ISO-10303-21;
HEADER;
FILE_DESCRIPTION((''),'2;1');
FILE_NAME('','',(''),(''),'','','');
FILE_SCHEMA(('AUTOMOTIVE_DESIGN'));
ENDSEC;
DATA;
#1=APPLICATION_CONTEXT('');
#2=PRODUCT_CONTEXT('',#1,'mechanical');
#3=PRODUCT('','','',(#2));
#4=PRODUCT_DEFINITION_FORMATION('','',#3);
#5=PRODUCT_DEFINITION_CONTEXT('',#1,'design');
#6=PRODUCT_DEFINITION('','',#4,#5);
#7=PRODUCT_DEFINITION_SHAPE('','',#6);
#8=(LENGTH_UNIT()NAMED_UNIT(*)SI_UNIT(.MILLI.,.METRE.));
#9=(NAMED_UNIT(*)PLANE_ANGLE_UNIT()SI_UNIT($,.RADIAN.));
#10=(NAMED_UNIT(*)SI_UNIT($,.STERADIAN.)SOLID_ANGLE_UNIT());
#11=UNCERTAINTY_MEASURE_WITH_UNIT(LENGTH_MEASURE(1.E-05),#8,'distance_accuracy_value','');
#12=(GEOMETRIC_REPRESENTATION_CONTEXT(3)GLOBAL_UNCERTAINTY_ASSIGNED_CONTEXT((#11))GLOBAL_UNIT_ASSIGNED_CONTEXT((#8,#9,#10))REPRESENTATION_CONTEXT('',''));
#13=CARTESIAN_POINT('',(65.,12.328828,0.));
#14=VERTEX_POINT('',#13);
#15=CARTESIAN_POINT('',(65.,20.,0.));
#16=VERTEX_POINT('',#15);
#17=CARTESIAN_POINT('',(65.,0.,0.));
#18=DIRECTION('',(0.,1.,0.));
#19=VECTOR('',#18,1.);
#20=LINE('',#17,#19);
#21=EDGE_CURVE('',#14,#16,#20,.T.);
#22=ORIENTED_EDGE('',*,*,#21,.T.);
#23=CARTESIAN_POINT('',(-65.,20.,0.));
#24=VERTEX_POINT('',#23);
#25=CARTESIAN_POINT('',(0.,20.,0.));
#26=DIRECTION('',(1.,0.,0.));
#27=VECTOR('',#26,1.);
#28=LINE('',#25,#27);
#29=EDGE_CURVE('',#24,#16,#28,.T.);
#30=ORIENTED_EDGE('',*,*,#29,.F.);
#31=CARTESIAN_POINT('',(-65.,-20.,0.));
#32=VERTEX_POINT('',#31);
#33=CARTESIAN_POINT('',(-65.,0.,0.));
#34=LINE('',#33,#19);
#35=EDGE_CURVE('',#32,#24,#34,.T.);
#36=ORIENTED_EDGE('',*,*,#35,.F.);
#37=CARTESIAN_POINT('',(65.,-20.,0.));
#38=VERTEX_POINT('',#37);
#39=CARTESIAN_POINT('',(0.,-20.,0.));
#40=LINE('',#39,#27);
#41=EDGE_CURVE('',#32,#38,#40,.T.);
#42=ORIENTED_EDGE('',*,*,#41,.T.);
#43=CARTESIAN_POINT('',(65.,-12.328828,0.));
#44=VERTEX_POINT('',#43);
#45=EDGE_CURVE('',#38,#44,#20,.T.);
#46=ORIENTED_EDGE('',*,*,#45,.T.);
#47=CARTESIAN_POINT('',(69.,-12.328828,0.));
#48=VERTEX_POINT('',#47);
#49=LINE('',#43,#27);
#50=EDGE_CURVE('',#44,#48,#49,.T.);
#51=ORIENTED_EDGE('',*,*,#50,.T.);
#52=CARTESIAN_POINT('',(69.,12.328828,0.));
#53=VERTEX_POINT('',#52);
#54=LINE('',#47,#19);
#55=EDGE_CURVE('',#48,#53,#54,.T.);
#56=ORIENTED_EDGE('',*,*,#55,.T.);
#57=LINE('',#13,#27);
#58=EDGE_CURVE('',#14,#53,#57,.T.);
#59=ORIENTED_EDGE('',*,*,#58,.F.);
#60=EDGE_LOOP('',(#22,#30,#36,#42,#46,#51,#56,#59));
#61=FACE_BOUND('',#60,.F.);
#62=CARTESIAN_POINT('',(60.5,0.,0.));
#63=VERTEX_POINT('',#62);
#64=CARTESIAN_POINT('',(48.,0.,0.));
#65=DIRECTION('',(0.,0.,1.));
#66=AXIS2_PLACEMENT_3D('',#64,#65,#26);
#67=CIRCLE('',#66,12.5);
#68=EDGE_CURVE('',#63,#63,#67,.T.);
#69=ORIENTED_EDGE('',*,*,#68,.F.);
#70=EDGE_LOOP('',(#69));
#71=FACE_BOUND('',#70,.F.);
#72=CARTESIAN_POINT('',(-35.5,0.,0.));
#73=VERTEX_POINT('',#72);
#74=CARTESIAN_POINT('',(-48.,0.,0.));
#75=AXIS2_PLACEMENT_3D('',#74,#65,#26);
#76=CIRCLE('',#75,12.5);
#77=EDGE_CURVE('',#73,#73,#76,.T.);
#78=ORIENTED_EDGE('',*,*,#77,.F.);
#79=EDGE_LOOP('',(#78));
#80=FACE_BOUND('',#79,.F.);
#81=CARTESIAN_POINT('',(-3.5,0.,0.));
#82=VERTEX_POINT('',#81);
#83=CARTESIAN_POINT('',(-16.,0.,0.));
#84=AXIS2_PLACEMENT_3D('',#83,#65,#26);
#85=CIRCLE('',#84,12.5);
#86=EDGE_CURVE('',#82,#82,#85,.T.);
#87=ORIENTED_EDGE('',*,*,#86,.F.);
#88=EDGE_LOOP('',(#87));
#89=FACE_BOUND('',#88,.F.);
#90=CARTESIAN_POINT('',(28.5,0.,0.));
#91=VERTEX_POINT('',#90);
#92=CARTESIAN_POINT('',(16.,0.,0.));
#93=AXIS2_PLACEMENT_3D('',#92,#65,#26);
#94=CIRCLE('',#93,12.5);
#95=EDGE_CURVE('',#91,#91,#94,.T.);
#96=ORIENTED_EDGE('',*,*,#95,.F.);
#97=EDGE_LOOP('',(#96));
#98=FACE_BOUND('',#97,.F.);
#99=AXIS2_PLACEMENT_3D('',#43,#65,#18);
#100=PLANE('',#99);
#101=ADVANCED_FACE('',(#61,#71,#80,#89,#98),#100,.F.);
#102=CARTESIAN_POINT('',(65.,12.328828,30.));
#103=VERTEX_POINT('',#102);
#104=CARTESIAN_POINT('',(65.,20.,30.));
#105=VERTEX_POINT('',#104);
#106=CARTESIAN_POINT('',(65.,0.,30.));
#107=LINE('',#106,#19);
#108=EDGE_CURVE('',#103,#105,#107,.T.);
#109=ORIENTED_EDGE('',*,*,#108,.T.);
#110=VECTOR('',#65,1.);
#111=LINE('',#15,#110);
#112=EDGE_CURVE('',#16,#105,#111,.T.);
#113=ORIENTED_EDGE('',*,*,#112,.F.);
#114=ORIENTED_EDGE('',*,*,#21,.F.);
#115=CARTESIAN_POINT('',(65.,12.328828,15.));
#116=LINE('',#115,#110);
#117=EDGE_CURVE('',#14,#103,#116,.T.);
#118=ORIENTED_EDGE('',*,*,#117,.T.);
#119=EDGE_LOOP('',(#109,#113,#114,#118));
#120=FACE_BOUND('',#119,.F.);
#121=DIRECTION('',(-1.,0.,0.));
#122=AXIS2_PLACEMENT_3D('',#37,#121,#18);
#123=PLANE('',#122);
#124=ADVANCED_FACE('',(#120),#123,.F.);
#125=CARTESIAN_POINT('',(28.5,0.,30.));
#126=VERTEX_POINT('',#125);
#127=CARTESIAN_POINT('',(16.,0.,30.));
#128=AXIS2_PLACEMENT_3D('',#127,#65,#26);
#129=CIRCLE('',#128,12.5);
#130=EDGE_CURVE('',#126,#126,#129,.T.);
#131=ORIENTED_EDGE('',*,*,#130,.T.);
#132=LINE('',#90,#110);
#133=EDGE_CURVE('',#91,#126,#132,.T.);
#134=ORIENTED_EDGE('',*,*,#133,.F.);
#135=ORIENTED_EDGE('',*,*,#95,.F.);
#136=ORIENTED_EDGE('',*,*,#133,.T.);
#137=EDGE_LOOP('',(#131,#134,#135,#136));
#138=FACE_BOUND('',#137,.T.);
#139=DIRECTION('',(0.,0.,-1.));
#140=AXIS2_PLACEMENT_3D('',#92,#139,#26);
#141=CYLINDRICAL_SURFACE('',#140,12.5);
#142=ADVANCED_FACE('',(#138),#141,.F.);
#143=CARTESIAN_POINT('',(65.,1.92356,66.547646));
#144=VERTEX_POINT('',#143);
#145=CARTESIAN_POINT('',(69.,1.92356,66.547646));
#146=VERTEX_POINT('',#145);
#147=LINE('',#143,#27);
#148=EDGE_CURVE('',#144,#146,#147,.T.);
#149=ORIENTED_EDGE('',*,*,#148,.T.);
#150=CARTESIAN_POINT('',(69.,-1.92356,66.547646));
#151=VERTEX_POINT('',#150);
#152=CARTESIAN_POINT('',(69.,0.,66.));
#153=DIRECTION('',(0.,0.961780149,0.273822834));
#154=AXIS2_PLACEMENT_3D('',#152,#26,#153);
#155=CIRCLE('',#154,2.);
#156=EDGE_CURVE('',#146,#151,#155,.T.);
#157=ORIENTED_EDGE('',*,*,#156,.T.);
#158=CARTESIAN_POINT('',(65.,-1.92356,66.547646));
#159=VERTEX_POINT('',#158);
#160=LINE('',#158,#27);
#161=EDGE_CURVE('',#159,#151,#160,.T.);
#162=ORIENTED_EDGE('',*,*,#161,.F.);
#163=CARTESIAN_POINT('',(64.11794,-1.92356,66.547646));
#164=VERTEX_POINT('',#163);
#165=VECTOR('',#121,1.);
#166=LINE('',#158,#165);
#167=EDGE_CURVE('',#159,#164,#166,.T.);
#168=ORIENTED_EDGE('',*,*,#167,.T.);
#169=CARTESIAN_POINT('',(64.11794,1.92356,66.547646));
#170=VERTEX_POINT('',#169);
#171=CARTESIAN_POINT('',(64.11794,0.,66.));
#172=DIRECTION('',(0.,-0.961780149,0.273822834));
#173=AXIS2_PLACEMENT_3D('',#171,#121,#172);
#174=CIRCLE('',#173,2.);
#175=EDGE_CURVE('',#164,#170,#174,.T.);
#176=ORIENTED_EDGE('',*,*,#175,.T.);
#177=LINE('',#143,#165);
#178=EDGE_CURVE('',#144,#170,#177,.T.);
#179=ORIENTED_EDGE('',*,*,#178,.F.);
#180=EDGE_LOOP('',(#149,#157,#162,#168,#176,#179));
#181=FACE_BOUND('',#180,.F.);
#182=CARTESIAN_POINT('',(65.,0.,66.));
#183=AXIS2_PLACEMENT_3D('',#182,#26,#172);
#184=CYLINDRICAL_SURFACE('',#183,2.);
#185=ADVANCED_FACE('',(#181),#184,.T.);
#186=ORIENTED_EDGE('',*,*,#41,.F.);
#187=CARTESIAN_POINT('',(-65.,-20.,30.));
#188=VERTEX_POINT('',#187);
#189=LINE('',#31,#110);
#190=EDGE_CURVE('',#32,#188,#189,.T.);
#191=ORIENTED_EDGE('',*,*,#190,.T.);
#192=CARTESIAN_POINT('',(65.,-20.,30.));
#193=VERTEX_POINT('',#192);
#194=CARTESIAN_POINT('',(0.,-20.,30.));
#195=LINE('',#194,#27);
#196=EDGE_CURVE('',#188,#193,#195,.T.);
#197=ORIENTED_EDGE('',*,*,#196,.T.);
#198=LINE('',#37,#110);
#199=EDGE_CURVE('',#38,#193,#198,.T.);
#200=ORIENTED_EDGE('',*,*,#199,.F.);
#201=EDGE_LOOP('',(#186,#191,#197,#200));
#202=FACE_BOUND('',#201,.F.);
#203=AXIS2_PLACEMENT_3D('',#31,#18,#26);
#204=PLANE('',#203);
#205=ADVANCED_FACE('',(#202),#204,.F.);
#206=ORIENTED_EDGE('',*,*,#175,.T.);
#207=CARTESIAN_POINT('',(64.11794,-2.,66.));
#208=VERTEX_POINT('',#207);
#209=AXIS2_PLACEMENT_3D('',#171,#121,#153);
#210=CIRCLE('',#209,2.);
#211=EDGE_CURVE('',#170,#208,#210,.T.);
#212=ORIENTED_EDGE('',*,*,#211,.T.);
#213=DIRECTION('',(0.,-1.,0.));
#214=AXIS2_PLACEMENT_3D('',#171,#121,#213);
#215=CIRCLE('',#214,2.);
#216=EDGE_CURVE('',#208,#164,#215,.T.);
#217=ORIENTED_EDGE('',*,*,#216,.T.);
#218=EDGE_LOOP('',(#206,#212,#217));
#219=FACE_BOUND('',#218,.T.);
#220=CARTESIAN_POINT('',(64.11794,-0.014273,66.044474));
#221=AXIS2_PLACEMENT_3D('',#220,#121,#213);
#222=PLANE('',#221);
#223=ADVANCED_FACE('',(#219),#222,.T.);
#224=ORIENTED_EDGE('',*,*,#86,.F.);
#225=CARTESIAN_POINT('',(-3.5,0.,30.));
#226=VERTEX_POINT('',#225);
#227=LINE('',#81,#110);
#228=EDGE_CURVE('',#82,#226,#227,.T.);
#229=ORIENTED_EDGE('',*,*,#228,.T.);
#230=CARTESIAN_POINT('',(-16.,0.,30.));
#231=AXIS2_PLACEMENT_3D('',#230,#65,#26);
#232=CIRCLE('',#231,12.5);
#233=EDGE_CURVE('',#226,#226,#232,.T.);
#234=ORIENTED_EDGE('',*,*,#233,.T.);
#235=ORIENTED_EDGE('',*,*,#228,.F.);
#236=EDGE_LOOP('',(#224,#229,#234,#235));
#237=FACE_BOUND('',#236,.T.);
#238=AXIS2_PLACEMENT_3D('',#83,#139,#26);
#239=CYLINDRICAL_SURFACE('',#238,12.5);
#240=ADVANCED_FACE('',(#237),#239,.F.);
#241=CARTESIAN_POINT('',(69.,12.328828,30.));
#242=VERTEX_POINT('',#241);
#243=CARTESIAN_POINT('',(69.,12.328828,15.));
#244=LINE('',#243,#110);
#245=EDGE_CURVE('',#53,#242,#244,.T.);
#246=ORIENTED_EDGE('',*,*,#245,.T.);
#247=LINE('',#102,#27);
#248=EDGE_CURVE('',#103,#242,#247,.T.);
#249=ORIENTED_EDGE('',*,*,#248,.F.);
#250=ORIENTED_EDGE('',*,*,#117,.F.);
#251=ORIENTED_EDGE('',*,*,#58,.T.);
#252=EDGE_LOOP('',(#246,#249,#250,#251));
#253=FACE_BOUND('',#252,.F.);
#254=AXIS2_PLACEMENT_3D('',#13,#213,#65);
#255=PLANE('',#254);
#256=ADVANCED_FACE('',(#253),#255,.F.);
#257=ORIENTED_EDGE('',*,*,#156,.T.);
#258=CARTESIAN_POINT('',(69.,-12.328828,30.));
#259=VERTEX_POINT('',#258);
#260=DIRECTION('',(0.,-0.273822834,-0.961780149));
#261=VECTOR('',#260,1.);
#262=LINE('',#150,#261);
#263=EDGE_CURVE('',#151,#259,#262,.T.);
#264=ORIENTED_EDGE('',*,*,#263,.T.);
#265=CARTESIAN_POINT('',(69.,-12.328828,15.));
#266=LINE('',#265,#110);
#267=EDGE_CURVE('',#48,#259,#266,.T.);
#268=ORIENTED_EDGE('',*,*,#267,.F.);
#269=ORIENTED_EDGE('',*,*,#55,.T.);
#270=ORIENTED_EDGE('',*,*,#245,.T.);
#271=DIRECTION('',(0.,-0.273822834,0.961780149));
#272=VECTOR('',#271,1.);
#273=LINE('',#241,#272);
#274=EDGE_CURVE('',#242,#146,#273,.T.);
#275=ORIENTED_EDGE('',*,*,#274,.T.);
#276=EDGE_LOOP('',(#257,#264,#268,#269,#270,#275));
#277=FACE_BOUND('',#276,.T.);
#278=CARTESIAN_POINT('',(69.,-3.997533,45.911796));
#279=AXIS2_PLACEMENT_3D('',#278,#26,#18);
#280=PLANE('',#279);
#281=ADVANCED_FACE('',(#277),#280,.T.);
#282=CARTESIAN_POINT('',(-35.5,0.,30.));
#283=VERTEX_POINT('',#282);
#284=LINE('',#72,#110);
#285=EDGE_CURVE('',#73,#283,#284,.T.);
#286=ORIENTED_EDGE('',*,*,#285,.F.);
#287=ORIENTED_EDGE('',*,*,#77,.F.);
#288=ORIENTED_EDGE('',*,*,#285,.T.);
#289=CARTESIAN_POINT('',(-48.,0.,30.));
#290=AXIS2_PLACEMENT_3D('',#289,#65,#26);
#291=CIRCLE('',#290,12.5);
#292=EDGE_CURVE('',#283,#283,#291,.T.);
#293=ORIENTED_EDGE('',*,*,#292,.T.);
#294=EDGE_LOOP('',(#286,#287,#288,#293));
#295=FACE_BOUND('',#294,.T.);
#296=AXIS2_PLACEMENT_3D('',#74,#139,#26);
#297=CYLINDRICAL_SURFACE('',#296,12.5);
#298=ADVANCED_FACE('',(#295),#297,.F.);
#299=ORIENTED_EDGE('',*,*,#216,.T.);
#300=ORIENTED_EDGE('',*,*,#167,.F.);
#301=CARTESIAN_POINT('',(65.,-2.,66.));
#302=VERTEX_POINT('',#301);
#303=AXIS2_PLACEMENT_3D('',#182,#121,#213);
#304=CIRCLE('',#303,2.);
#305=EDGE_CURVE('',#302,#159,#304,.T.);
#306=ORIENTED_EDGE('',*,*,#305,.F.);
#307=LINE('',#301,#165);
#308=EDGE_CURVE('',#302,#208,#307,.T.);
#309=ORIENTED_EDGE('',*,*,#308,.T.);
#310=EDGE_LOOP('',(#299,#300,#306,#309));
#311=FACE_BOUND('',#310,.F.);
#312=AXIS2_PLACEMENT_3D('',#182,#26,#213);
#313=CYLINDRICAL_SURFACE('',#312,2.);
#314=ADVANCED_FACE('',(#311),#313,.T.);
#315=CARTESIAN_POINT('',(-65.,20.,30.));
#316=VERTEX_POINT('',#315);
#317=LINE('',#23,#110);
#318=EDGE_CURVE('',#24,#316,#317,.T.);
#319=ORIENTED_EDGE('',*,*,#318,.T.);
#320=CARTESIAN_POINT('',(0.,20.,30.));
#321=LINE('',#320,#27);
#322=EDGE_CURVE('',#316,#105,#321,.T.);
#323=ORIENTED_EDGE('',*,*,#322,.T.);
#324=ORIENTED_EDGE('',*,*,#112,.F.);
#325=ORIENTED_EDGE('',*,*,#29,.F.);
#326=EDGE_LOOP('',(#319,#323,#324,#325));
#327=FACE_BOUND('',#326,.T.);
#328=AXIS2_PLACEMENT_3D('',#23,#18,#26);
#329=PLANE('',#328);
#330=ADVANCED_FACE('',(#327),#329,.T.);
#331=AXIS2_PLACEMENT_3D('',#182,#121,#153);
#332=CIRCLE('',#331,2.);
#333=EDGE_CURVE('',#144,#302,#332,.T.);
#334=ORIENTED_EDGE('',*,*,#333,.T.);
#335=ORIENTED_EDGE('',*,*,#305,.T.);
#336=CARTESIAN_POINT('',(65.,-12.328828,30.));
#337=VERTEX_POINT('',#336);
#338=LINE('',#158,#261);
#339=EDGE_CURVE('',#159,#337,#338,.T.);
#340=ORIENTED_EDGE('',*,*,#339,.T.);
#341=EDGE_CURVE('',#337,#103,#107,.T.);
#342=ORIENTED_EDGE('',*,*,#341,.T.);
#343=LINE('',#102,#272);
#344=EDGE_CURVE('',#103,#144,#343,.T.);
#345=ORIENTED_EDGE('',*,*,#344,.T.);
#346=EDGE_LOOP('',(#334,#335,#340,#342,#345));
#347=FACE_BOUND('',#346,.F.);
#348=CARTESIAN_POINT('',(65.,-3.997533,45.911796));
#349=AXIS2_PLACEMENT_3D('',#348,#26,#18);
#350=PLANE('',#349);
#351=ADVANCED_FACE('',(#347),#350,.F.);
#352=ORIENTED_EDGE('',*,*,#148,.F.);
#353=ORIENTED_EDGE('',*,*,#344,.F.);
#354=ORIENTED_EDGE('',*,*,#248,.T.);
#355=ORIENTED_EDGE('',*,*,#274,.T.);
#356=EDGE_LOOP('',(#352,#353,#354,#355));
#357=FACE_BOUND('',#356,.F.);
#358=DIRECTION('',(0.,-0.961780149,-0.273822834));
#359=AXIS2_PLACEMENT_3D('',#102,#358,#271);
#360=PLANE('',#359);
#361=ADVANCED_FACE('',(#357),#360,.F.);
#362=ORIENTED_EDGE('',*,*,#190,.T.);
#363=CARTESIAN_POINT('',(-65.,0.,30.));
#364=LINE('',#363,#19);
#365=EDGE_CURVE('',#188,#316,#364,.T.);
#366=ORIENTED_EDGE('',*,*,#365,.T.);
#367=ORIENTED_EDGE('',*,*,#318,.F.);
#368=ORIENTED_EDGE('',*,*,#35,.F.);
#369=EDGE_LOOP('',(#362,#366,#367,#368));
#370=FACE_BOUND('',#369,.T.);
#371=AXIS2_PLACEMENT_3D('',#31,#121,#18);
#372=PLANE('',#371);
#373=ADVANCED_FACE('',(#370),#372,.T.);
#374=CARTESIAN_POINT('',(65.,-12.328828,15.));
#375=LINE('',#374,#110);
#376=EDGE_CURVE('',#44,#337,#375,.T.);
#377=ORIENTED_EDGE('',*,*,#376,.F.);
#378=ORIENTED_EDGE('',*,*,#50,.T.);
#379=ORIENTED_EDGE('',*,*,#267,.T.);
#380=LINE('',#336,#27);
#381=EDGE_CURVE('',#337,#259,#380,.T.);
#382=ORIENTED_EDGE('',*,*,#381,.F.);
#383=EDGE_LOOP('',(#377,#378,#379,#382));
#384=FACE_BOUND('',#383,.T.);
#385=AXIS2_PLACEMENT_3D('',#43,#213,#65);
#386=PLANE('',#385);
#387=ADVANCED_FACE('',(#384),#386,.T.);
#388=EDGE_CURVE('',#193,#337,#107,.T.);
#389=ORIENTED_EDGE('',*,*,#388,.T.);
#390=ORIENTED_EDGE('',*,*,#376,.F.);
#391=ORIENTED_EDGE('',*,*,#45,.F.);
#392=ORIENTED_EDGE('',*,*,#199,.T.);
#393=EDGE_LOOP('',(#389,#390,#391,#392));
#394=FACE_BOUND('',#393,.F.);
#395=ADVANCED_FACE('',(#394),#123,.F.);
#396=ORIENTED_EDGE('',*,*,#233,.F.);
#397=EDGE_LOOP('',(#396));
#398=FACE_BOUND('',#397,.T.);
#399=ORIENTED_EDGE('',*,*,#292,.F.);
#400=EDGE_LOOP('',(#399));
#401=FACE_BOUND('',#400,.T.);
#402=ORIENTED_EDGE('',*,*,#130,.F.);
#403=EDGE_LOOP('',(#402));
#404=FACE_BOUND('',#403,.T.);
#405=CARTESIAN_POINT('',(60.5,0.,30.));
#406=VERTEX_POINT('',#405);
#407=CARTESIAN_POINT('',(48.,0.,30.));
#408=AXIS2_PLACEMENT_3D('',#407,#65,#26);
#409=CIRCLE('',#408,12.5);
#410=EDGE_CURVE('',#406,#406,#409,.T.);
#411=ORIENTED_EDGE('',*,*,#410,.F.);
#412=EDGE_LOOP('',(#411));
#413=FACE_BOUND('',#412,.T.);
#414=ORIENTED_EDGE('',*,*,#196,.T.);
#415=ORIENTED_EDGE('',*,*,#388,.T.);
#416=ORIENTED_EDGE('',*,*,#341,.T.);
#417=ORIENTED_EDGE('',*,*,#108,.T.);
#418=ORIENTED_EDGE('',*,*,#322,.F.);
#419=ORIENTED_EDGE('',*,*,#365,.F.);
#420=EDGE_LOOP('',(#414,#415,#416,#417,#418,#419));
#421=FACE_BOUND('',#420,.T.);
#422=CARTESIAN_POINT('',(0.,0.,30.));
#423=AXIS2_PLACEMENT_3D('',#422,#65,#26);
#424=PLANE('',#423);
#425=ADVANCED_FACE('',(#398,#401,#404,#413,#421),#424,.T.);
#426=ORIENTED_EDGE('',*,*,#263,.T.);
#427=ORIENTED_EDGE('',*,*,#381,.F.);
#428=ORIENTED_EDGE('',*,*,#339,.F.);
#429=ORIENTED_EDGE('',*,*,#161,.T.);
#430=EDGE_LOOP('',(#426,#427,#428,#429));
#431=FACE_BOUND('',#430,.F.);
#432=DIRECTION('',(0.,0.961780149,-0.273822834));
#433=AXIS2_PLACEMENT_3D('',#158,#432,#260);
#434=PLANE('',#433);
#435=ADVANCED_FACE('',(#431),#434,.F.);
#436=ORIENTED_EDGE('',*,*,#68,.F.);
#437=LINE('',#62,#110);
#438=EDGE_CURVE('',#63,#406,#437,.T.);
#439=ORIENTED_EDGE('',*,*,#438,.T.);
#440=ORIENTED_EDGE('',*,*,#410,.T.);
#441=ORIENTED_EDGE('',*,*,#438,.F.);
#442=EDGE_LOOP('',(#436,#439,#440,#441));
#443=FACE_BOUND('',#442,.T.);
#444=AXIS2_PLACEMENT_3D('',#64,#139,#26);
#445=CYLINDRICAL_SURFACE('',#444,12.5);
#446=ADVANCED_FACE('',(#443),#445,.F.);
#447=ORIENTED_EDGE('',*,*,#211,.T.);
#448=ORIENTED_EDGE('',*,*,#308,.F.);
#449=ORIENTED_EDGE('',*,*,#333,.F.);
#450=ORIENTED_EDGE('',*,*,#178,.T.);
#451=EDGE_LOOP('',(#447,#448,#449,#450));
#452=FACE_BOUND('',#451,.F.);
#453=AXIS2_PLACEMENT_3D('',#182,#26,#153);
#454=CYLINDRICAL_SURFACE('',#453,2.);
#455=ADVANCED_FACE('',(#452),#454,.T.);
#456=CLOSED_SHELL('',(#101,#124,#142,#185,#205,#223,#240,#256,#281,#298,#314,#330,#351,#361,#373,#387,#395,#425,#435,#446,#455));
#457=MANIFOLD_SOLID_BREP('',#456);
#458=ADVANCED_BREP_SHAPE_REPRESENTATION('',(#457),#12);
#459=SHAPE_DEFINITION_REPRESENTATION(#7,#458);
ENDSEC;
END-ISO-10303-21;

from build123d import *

# Parameters (mm, degrees)
F0_W     = 130
F0_H     = 40
F0_R     = 12.5
F1_DEPTH = 30
F2_W     = 12.3288280059
F2_H     = 30
F3_DEPTH = 4
F4_DEPTH = 4
F6_DEPTH = 0.88206


with BuildPart() as f1:
    # F0 (on Top) → F1 (new body)
    with BuildSketch(Plane.XY):
        Rectangle(F0_W, F0_H)
        with Locations((-48, 0)):
            Circle(F0_R, mode=Mode.SUBTRACT)
        with Locations((-16, 0)):
            Circle(F0_R, mode=Mode.SUBTRACT)
        with Locations((16, 0)):
            Circle(F0_R, mode=Mode.SUBTRACT)
        with Locations((48, 0)):
            Circle(F0_R, mode=Mode.SUBTRACT)
    extrude(amount=F1_DEPTH)

    # F2 (on face) → F3 (join)
    with BuildSketch(Plane.YZ.offset(65)):
        with BuildLine():
            Line((-12.3288280059, 30), (0, 30))
            Line((0, 30), (0, 64))
            ThreePointArc((0, 64), (-1.5961346024, 64.7948633558), (-1.9235602984, 66.5476456688))
            Line((-1.9235602984, 66.5476456688), (-12.3288280059, 30))
        make_face()
        with BuildLine():
            Line((0, 64), (0, 30))
            Line((0, 30), (12.3288280059, 30))
            Line((12.3288280059, 30), (1.9235602984, 66.5476456688))
            ThreePointArc((1.9235602984, 66.5476456688), (1.9807978944, 66.2764773076), (2, 66))
            ThreePointArc((2, 66), (1.4142135624, 64.5857864376), (0, 64))
        make_face()
        with Locations((6.164414003, 15)):
            Rectangle(F2_W, F2_H)
        with Locations((-6.164414003, 15)):
            Rectangle(F2_W, F2_H)
    extrude(amount=F3_DEPTH)

    # F2 (on face) → F4 (join)
    with BuildSketch(Plane.YZ.offset(65)):
        with BuildLine():
            Line((0, 0), (0, 30))
            Line((0, 30), (0, 64))
            ThreePointArc((0, 64), (-1.5961346024, 64.7948633558), (-1.9235602984, 66.5476456688))
            Line((-1.9235602984, 66.5476456688), (-12.3288280059, 30))
            Line((-12.3288280059, 30), (-12.3288280059, 0))
            Line((-12.3288280059, 0), (0, 0))
        make_face()
        with BuildLine():
            Line((0, 64), (0, 30))
            Line((0, 30), (0, 0))
            Line((0, 0), (12.3288280059, 0))
            Line((12.3288280059, 0), (12.3288280059, 30))
            Line((12.3288280059, 30), (1.9235602984, 66.5476456688))
            ThreePointArc((1.9235602984, 66.5476456688), (1.9807978944, 66.2764773076), (2, 66))
            ThreePointArc((2, 66), (1.4142135624, 64.5857864376), (0, 64))
        make_face()
        with BuildLine():
            ThreePointArc((-1.9235602984, 66.5476456688), (-1.5961346024, 64.7948633558), (0, 64))
            ThreePointArc((0, 64), (1.4142135624, 64.5857864376), (2, 66))
            ThreePointArc((2, 66), (1.9807978944, 66.2764773076), (1.9235602984, 66.5476456688))
            ThreePointArc((1.9235602984, 66.5476456688), (0, 68), (-1.9235602984, 66.5476456688))
        make_face()
    extrude(amount=F4_DEPTH)

    # F5 (on face) → F6 (join)
    with BuildSketch(Plane(origin=(65, 0, 0), x_dir=(0, -1, 0), z_dir=(-1, 0, 0))):
        with BuildLine():
            ThreePointArc((-1.9235602984, 66.5476456688), (-0.2764773076, 64.0192021056), (2, 66))
            ThreePointArc((2, 66), (1.9807978944, 66.2764773076), (1.9235602984, 66.5476456688))
            ThreePointArc((1.9235602984, 66.5476456688), (0, 68), (-1.9235602984, 66.5476456688))
        make_face()
    extrude(amount=F6_DEPTH)


solid = f1.part
